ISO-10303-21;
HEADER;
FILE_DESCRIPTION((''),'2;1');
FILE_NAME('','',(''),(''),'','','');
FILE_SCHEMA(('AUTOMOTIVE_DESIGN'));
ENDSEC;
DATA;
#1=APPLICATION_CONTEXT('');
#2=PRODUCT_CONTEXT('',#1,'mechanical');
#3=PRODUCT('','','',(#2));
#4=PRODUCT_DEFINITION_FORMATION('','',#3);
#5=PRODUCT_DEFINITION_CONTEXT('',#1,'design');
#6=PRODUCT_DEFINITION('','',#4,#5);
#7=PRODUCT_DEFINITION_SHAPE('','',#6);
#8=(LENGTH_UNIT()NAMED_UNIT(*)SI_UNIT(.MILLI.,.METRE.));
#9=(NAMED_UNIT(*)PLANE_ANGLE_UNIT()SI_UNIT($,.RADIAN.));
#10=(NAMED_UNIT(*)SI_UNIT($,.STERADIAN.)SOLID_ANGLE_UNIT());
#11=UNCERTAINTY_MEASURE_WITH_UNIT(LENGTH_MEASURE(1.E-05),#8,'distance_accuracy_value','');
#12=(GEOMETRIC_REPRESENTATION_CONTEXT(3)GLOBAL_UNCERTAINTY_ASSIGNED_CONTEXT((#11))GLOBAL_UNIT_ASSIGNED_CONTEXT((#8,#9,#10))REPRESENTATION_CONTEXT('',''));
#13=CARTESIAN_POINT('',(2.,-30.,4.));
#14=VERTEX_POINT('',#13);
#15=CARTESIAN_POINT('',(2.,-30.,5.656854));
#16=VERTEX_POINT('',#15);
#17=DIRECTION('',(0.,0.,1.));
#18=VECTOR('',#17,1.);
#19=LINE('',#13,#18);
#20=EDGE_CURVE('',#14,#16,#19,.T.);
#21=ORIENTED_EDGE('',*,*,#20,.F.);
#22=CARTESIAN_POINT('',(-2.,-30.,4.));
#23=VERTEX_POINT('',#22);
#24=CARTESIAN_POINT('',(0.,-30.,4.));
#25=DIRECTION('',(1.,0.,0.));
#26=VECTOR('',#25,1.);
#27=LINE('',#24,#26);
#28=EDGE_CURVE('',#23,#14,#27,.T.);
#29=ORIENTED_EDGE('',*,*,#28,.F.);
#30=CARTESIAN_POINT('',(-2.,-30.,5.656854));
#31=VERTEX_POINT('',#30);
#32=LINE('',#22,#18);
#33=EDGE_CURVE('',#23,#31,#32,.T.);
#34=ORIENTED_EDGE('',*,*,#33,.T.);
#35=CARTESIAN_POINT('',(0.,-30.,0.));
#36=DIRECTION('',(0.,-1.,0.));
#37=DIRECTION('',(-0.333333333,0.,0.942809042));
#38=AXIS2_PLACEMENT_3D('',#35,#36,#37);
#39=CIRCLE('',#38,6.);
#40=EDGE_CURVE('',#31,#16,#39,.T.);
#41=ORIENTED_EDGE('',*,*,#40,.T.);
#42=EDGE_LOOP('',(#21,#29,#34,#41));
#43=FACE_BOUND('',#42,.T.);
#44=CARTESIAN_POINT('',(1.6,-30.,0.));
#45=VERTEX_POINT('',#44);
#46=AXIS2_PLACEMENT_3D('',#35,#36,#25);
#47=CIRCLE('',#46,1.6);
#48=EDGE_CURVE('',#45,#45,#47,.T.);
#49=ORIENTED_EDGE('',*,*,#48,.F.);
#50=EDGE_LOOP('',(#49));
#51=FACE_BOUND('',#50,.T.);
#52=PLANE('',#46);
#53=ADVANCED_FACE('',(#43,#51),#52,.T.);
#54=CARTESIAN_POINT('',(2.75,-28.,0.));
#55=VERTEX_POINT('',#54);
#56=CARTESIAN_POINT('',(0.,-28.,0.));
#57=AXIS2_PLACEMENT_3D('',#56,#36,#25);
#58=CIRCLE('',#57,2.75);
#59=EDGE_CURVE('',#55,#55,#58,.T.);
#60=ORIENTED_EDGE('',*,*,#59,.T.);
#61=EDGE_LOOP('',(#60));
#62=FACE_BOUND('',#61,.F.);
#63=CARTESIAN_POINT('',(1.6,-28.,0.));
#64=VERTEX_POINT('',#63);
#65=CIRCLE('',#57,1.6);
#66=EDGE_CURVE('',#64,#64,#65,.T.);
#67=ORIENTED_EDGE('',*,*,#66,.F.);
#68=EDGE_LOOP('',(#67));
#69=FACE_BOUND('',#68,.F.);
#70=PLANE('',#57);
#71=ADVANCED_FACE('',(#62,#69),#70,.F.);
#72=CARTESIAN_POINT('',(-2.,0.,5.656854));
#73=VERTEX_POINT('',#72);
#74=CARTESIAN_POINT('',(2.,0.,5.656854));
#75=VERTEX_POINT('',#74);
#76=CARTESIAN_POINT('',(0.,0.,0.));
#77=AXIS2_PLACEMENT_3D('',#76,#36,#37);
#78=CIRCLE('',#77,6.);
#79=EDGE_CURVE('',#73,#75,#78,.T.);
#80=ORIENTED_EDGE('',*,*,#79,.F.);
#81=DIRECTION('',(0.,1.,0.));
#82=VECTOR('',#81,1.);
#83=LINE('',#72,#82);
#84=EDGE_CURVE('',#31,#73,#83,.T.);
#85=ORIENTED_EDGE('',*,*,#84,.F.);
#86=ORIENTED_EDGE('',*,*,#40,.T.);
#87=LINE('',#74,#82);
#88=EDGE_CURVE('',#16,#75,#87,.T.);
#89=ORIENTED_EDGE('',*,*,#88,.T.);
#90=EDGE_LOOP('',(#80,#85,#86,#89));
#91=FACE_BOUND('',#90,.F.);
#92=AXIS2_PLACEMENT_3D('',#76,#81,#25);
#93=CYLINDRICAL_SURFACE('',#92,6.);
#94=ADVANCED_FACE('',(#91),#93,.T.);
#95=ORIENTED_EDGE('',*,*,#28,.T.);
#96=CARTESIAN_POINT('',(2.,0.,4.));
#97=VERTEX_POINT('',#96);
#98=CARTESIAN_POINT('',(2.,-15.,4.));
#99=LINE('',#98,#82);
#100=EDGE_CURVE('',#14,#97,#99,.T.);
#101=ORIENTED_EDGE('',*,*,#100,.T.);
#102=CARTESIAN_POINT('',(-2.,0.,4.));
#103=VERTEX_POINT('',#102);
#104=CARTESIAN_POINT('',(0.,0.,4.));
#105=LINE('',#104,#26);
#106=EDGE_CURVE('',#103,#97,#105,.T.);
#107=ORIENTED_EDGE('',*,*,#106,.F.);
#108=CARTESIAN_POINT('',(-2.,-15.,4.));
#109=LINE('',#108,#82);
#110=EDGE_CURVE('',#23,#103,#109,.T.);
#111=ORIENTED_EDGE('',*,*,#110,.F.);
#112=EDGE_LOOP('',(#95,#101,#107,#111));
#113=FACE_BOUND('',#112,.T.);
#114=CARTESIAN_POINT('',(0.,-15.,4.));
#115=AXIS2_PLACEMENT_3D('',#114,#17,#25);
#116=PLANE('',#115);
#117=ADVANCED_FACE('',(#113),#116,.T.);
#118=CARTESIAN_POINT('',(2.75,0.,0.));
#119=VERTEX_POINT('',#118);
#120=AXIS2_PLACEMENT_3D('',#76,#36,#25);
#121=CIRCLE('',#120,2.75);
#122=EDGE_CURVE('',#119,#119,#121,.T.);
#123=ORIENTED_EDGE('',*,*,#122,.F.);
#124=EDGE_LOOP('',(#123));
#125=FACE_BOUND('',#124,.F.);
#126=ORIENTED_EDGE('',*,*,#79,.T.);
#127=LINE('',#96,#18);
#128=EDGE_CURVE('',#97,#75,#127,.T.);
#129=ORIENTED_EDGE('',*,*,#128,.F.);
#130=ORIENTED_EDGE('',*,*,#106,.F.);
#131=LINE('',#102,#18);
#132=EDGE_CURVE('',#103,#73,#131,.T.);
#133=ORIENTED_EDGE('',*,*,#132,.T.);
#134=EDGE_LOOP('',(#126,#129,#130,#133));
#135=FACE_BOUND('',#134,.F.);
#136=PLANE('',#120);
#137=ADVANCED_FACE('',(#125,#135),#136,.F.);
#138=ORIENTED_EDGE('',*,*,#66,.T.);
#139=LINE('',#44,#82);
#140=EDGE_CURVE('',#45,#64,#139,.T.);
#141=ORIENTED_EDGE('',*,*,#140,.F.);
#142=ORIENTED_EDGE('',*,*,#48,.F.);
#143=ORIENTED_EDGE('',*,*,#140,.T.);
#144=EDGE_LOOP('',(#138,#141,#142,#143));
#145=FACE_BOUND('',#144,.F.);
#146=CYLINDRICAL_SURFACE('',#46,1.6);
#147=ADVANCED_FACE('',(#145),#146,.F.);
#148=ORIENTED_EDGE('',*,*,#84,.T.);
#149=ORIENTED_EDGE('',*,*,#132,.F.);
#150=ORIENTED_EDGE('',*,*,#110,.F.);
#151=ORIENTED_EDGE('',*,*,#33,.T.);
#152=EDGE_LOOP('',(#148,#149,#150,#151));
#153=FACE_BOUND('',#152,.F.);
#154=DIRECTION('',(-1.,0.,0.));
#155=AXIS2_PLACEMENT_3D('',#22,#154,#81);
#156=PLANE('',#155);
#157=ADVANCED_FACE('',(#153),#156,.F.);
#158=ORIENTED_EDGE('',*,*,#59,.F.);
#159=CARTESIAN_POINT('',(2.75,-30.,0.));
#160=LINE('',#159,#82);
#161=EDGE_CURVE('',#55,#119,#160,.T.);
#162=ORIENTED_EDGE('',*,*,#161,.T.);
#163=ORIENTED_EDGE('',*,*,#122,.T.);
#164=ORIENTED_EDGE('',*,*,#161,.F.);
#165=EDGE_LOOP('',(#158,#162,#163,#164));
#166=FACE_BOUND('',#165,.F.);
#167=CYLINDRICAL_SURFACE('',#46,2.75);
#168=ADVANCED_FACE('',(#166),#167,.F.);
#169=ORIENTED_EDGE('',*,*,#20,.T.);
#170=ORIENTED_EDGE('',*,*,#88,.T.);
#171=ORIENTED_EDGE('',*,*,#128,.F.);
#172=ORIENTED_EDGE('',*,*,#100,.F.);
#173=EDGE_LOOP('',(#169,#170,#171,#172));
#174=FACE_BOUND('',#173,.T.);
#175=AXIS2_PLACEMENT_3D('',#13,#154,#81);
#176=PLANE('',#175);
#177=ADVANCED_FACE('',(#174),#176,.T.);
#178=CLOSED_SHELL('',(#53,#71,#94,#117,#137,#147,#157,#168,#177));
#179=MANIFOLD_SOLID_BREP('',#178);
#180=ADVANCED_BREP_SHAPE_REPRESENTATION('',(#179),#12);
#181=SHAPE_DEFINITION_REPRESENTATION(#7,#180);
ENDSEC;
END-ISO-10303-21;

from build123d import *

# Parameters (mm, degrees)
F0_R      = 6
F1_DEPTH  = 30
F2_R      = 2.75
F3_DEPTH  = 30.001
F8_R      = 5
F8_R_2    = 1.6
F9_DEPTH  = 2
F12_W     = 4
F12_H     = 30
F13_DEPTH = 3


with BuildPart() as f1:
    # F0 (on Front) → F1 (new body)
    with BuildSketch(Plane.XZ):
        Circle(F0_R)
    extrude(amount=F1_DEPTH)

    # F2 (on face) → F3 (cut, through all)
    with BuildSketch(Plane.XZ.offset(30)):
        Circle(F2_R)
    extrude(amount=-F3_DEPTH, mode=Mode.SUBTRACT)

    # F8 (on face) → F9 (join)
    with BuildSketch(Plane.XZ.offset(30)):
        Circle(F8_R)
        Circle(F8_R_2, mode=Mode.SUBTRACT)
    extrude(amount=-F9_DEPTH)

    # F12 (on offset) → F13 (cut)
    with BuildSketch(Plane.XY.offset(4)):
        with Locations((0, -15)):
            Rectangle(F12_W, F12_H)
    extrude(amount=F13_DEPTH, mode=Mode.SUBTRACT)


solid = f1.part
